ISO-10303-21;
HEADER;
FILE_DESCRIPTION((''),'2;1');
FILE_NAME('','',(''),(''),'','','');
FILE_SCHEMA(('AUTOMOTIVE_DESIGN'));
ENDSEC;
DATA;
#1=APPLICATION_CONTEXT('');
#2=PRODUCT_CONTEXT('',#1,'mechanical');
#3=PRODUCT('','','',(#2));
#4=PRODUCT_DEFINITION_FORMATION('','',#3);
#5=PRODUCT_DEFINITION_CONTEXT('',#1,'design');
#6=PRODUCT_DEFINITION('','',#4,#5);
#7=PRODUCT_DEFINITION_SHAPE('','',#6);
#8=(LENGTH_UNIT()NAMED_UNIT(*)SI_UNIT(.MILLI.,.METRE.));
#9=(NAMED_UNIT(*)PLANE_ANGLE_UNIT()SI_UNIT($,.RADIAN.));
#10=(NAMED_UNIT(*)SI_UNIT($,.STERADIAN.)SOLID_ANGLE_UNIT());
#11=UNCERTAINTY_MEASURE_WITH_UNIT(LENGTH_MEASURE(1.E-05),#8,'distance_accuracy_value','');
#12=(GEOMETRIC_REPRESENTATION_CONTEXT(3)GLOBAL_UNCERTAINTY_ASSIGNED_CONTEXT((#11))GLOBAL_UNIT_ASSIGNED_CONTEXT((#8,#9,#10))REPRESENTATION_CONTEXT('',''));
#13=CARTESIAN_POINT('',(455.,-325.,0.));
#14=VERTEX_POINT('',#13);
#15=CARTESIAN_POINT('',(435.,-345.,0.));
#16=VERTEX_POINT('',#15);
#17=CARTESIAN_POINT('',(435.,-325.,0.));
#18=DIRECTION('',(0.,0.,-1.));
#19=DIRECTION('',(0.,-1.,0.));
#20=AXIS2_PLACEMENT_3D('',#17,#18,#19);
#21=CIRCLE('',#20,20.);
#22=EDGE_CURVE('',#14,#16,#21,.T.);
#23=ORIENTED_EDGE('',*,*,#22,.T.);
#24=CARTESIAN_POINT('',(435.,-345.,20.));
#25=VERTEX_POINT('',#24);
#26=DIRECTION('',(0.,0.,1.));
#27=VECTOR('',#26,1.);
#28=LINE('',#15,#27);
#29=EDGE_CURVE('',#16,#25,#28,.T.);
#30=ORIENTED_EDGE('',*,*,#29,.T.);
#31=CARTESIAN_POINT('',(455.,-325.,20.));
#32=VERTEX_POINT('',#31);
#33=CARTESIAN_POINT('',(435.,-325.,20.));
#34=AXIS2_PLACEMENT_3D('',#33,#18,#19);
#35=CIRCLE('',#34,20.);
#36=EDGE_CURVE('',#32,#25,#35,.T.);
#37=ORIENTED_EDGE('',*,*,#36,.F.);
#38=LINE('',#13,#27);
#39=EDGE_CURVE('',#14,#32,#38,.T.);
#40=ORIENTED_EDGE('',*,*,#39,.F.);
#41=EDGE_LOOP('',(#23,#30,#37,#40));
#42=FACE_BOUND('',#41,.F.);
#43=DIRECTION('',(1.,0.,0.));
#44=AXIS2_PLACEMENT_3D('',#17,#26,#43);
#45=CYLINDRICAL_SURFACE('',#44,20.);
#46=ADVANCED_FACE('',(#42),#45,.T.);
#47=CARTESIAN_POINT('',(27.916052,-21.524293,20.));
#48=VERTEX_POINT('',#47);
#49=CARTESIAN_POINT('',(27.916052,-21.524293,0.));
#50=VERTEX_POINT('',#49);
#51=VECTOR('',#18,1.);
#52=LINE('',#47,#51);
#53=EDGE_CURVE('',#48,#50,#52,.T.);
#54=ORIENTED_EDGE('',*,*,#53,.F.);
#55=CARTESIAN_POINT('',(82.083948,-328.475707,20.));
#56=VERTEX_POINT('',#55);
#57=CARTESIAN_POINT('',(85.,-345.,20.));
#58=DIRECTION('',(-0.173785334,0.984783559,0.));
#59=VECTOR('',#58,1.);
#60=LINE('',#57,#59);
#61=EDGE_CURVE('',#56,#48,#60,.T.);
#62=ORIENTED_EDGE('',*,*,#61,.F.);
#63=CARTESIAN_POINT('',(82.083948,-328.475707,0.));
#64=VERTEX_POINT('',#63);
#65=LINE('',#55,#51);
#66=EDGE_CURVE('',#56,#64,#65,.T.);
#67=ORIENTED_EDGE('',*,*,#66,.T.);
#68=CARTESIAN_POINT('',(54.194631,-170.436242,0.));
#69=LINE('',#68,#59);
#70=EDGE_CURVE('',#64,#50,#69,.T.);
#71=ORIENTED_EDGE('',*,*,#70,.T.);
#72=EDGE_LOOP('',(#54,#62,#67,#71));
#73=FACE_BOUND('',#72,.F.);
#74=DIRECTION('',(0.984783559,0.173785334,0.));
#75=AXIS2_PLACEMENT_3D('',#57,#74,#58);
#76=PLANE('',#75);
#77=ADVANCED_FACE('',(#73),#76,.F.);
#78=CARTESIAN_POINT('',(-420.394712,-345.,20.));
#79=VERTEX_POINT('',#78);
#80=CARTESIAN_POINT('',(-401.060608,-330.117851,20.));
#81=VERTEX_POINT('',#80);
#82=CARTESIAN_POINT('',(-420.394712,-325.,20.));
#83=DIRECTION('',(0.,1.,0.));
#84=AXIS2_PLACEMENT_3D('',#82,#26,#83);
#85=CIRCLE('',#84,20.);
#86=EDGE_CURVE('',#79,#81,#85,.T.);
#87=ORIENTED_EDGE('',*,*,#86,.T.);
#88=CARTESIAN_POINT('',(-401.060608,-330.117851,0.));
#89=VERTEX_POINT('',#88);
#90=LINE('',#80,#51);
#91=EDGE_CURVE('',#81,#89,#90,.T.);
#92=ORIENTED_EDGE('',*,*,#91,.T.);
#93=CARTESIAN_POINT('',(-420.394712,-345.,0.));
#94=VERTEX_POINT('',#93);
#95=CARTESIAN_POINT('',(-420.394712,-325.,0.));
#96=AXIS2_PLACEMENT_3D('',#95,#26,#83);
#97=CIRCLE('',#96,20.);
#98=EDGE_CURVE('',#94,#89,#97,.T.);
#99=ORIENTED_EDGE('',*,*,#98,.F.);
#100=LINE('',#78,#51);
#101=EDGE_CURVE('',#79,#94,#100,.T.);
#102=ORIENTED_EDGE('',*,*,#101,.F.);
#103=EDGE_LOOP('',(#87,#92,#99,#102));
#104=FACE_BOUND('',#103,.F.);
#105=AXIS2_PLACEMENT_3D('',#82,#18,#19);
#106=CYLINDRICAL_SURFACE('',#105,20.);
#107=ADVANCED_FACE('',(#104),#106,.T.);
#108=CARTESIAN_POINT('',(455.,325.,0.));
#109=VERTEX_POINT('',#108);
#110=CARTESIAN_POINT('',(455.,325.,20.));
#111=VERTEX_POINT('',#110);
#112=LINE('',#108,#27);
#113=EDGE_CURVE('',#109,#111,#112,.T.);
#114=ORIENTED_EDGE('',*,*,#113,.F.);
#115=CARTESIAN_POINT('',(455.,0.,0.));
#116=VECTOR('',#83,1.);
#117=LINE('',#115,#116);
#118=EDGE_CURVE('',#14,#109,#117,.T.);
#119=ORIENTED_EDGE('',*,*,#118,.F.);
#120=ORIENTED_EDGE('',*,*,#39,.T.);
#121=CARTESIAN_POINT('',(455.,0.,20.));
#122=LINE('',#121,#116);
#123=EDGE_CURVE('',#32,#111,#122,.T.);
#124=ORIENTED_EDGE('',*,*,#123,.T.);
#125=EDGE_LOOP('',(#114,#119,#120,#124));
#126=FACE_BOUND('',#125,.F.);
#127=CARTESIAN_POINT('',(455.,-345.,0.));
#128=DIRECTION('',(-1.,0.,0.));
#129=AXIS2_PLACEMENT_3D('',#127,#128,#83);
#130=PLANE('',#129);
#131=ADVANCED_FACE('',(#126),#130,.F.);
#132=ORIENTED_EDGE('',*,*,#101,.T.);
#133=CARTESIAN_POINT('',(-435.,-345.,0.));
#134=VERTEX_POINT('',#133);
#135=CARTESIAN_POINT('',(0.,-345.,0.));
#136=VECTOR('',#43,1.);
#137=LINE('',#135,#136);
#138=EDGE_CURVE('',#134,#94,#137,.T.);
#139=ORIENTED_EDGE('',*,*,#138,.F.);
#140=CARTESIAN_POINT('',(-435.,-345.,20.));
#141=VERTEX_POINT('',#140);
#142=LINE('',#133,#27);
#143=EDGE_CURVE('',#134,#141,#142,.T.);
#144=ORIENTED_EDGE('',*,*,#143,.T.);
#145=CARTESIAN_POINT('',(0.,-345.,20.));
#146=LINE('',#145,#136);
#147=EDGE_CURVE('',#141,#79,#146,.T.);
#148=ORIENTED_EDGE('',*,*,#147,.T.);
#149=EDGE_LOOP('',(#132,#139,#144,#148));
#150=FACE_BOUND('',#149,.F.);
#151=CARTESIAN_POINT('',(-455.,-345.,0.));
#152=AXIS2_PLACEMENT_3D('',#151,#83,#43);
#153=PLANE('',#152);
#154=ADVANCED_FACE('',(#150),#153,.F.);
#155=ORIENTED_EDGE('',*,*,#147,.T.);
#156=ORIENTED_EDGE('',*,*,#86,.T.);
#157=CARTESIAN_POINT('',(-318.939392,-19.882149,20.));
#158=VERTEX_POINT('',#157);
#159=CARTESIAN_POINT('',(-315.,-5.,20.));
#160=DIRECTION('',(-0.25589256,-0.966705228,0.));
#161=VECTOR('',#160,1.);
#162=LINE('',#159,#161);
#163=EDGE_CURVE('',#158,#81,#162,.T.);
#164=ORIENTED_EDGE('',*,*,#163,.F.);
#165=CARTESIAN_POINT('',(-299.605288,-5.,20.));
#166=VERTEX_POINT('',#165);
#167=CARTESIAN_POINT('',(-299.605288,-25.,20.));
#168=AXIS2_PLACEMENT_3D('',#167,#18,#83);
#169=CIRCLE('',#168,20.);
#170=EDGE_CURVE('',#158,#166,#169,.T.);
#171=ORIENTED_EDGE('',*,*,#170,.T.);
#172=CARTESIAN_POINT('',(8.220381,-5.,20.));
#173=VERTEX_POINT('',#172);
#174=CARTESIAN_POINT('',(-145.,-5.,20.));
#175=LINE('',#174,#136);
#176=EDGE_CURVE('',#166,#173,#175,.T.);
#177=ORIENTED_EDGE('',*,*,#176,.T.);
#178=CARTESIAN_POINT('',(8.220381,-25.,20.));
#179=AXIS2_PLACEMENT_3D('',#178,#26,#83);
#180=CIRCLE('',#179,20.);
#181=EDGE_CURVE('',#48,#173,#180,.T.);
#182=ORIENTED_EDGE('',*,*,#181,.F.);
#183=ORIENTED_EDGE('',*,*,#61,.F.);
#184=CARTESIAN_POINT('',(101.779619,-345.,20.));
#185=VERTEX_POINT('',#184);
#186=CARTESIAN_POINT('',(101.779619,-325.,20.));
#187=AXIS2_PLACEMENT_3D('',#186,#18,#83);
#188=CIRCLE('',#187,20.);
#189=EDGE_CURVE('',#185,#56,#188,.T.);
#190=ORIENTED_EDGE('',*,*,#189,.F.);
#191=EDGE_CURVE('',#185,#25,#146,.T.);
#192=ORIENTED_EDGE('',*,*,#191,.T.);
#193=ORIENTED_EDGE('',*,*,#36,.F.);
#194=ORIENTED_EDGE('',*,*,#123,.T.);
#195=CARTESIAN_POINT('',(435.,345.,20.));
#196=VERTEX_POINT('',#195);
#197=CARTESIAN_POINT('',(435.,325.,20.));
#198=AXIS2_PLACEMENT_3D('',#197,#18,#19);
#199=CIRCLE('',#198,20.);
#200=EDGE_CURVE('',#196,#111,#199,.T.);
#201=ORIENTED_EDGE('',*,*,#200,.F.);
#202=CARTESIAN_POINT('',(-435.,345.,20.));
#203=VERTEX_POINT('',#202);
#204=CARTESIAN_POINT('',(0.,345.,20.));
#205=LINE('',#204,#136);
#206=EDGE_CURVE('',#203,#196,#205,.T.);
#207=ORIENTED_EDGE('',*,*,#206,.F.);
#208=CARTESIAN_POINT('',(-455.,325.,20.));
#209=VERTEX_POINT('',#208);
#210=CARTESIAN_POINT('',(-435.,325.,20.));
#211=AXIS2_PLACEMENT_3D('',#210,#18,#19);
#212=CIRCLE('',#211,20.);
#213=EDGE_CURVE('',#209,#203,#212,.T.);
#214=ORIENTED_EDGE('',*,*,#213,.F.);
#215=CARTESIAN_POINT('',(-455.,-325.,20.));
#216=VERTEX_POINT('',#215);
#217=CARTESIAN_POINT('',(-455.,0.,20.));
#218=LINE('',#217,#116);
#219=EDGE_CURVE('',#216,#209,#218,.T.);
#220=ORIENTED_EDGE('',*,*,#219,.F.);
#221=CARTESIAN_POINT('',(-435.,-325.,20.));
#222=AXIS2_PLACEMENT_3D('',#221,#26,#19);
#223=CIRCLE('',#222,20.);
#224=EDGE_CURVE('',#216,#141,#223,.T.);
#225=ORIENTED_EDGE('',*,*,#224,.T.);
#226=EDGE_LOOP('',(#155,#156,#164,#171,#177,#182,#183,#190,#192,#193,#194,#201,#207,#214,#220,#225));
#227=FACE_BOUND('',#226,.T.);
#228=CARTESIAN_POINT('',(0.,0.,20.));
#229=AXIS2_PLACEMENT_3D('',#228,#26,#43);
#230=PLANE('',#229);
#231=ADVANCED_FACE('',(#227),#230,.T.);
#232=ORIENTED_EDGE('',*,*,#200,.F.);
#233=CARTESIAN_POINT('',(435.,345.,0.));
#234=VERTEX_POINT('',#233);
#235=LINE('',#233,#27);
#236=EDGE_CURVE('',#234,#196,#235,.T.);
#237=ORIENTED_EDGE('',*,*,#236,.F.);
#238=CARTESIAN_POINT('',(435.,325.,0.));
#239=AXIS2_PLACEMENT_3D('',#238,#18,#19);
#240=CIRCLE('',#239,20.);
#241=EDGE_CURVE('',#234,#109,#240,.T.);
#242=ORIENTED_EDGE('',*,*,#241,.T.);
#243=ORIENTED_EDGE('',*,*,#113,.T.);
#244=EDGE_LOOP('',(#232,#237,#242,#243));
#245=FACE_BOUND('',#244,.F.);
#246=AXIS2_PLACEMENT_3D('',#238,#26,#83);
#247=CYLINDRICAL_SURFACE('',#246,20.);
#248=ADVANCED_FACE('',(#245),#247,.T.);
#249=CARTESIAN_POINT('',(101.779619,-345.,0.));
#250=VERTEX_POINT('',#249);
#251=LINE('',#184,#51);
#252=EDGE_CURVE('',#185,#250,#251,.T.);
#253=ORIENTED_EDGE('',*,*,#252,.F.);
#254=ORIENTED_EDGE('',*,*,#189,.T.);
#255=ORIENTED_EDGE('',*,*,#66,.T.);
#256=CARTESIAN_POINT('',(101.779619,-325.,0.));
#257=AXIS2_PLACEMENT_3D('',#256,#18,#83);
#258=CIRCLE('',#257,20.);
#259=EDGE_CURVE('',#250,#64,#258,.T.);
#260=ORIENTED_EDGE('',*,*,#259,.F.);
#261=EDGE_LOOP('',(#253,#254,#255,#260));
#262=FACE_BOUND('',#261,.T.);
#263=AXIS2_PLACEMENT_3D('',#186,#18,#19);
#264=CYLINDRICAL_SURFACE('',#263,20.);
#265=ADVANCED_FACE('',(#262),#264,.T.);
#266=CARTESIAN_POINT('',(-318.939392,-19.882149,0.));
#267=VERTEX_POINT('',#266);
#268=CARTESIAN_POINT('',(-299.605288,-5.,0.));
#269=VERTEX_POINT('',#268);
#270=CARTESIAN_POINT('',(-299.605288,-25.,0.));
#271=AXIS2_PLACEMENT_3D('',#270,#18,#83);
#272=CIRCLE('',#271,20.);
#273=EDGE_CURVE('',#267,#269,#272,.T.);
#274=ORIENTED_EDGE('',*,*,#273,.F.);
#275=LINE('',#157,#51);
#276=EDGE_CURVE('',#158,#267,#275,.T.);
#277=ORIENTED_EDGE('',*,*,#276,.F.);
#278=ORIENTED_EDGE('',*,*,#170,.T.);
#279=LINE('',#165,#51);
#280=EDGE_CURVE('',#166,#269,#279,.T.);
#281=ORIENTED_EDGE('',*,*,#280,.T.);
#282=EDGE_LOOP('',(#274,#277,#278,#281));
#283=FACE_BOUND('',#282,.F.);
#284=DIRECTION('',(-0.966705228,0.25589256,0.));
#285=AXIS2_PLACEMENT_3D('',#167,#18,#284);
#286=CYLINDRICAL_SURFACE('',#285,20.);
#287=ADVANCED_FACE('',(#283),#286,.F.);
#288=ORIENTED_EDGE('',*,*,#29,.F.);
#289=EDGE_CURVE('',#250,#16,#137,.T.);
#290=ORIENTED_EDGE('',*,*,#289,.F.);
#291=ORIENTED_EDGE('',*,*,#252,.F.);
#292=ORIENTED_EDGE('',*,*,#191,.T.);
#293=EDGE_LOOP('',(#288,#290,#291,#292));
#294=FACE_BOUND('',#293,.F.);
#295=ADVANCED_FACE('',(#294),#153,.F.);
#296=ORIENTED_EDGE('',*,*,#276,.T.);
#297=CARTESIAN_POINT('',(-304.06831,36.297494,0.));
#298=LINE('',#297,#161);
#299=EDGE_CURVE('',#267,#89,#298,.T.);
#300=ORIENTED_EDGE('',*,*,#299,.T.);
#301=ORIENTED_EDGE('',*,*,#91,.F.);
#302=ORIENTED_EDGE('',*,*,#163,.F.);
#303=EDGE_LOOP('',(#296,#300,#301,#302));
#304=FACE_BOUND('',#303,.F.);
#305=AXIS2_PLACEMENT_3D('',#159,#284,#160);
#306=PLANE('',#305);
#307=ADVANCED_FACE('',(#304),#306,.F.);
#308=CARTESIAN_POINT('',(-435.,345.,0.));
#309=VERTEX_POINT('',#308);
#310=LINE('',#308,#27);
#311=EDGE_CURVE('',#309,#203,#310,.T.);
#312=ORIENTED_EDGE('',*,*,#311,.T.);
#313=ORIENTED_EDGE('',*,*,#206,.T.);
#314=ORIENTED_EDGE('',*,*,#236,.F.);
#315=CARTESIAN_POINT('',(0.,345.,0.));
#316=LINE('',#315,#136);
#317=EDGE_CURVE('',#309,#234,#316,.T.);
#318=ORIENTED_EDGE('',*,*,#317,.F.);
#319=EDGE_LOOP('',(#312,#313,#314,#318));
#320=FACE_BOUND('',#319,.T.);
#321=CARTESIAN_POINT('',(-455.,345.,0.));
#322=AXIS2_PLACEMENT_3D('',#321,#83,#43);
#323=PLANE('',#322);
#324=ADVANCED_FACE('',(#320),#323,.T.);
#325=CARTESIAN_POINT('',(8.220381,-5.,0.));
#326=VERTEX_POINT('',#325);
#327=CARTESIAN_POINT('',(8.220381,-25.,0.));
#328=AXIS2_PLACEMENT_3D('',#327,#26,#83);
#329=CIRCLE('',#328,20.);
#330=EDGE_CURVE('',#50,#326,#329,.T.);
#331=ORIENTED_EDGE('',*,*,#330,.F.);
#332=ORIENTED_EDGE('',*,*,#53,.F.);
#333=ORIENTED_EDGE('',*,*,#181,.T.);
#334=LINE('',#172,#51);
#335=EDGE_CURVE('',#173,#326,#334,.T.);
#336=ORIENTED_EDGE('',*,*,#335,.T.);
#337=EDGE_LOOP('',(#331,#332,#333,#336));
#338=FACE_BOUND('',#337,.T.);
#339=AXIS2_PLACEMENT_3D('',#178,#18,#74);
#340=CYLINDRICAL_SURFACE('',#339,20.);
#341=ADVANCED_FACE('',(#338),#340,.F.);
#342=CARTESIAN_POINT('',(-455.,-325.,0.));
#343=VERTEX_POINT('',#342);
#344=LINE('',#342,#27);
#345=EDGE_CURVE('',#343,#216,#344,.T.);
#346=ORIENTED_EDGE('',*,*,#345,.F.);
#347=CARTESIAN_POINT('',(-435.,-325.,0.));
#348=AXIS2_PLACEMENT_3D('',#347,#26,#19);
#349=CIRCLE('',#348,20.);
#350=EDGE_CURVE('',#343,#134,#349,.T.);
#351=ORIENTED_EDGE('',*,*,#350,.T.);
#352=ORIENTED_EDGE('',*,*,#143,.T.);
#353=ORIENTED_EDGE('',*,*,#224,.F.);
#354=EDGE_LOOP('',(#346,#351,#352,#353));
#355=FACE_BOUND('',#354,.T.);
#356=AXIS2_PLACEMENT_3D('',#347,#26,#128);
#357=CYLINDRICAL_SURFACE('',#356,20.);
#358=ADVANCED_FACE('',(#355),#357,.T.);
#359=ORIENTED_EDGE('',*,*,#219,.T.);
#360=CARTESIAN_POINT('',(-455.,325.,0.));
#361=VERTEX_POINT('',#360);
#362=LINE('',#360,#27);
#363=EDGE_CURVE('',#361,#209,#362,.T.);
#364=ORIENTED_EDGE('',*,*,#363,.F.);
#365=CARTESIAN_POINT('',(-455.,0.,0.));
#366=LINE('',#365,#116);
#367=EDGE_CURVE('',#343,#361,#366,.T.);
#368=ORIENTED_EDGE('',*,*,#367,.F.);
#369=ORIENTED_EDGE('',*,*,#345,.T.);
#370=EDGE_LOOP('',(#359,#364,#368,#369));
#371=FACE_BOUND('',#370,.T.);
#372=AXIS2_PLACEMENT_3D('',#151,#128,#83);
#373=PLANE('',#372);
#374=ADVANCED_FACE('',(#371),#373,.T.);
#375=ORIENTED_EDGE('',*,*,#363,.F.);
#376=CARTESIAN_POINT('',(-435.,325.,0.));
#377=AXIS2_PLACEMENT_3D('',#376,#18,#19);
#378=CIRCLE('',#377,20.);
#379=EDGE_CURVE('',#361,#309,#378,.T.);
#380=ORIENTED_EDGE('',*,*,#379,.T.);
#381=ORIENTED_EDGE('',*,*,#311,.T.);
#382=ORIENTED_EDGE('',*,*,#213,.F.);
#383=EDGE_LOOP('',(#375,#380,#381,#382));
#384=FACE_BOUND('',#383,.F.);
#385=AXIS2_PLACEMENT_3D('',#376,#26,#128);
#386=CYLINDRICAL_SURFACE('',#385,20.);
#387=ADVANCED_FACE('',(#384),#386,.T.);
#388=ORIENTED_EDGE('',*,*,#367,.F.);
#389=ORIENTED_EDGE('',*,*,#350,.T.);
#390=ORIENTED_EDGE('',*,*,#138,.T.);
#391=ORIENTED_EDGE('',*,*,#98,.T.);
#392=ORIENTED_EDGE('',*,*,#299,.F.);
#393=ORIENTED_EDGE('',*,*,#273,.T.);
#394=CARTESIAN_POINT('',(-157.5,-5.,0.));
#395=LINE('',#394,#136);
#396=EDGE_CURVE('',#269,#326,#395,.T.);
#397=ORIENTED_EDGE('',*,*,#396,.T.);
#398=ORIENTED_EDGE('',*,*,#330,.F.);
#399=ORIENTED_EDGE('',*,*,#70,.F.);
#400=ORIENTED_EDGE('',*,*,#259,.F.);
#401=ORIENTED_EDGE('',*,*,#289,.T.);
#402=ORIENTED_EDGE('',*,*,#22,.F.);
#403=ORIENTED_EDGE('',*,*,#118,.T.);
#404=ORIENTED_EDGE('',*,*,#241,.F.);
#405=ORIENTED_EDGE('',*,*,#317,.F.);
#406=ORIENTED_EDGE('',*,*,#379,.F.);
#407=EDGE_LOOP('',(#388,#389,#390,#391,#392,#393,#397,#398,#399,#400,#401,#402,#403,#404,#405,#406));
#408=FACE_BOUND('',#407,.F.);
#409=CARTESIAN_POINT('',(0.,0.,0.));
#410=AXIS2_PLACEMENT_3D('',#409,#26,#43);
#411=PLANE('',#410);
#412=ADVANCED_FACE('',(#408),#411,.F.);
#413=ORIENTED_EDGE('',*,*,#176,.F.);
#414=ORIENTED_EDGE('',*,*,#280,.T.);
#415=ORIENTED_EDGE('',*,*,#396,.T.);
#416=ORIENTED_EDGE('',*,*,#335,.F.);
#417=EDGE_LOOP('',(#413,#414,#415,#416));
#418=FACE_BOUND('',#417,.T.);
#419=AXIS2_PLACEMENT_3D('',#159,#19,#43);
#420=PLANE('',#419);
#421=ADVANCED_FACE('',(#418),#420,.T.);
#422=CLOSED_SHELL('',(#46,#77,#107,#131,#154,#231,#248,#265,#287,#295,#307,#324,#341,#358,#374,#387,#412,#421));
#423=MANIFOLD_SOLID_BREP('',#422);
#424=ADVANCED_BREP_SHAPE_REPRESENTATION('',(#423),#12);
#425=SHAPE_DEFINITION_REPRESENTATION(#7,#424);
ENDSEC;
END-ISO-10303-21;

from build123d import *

# Parameters (mm, degrees)
F0_W     = 910
F0_H     = 690
F1_DEPTH = 20
F2_W     = 340
F2_H     = 340
F3_DEPTH = 25
F4_R     = 20


with BuildPart() as f1:
    # F0 (on Top) → F1 (new body)
    with BuildSketch(Plane.XY):
        Rectangle(F0_W, F0_H)
    extrude(amount=F1_DEPTH)

    # F2 (on face) → F3 (cut)
    with BuildSketch(Plane.XY.offset(20)):
        with Locations((-145, -175)):
            Rectangle(F2_W, F2_H)
        Polygon((-405, -345), (-315, -345), (-315, -5), align=None)
        Polygon((25, -5), (25, -345), (85, -345), align=None)
    extrude(amount=-F3_DEPTH, mode=Mode.SUBTRACT)

    # F4
    f4_edges = [f1.edges().sort_by_distance(p)[0] for p in [
        (-315, -5, 10),
        (25, -5, 10),
        (455, -345, 10),
        (455, 345, 10),
        (-455, 345, 10),
        (-455, -345, 10),
        (-405, -345, 10),
        (85, -345, 10),
    ]]
    fillet(f4_edges, radius=F4_R)


solid = f1.part
